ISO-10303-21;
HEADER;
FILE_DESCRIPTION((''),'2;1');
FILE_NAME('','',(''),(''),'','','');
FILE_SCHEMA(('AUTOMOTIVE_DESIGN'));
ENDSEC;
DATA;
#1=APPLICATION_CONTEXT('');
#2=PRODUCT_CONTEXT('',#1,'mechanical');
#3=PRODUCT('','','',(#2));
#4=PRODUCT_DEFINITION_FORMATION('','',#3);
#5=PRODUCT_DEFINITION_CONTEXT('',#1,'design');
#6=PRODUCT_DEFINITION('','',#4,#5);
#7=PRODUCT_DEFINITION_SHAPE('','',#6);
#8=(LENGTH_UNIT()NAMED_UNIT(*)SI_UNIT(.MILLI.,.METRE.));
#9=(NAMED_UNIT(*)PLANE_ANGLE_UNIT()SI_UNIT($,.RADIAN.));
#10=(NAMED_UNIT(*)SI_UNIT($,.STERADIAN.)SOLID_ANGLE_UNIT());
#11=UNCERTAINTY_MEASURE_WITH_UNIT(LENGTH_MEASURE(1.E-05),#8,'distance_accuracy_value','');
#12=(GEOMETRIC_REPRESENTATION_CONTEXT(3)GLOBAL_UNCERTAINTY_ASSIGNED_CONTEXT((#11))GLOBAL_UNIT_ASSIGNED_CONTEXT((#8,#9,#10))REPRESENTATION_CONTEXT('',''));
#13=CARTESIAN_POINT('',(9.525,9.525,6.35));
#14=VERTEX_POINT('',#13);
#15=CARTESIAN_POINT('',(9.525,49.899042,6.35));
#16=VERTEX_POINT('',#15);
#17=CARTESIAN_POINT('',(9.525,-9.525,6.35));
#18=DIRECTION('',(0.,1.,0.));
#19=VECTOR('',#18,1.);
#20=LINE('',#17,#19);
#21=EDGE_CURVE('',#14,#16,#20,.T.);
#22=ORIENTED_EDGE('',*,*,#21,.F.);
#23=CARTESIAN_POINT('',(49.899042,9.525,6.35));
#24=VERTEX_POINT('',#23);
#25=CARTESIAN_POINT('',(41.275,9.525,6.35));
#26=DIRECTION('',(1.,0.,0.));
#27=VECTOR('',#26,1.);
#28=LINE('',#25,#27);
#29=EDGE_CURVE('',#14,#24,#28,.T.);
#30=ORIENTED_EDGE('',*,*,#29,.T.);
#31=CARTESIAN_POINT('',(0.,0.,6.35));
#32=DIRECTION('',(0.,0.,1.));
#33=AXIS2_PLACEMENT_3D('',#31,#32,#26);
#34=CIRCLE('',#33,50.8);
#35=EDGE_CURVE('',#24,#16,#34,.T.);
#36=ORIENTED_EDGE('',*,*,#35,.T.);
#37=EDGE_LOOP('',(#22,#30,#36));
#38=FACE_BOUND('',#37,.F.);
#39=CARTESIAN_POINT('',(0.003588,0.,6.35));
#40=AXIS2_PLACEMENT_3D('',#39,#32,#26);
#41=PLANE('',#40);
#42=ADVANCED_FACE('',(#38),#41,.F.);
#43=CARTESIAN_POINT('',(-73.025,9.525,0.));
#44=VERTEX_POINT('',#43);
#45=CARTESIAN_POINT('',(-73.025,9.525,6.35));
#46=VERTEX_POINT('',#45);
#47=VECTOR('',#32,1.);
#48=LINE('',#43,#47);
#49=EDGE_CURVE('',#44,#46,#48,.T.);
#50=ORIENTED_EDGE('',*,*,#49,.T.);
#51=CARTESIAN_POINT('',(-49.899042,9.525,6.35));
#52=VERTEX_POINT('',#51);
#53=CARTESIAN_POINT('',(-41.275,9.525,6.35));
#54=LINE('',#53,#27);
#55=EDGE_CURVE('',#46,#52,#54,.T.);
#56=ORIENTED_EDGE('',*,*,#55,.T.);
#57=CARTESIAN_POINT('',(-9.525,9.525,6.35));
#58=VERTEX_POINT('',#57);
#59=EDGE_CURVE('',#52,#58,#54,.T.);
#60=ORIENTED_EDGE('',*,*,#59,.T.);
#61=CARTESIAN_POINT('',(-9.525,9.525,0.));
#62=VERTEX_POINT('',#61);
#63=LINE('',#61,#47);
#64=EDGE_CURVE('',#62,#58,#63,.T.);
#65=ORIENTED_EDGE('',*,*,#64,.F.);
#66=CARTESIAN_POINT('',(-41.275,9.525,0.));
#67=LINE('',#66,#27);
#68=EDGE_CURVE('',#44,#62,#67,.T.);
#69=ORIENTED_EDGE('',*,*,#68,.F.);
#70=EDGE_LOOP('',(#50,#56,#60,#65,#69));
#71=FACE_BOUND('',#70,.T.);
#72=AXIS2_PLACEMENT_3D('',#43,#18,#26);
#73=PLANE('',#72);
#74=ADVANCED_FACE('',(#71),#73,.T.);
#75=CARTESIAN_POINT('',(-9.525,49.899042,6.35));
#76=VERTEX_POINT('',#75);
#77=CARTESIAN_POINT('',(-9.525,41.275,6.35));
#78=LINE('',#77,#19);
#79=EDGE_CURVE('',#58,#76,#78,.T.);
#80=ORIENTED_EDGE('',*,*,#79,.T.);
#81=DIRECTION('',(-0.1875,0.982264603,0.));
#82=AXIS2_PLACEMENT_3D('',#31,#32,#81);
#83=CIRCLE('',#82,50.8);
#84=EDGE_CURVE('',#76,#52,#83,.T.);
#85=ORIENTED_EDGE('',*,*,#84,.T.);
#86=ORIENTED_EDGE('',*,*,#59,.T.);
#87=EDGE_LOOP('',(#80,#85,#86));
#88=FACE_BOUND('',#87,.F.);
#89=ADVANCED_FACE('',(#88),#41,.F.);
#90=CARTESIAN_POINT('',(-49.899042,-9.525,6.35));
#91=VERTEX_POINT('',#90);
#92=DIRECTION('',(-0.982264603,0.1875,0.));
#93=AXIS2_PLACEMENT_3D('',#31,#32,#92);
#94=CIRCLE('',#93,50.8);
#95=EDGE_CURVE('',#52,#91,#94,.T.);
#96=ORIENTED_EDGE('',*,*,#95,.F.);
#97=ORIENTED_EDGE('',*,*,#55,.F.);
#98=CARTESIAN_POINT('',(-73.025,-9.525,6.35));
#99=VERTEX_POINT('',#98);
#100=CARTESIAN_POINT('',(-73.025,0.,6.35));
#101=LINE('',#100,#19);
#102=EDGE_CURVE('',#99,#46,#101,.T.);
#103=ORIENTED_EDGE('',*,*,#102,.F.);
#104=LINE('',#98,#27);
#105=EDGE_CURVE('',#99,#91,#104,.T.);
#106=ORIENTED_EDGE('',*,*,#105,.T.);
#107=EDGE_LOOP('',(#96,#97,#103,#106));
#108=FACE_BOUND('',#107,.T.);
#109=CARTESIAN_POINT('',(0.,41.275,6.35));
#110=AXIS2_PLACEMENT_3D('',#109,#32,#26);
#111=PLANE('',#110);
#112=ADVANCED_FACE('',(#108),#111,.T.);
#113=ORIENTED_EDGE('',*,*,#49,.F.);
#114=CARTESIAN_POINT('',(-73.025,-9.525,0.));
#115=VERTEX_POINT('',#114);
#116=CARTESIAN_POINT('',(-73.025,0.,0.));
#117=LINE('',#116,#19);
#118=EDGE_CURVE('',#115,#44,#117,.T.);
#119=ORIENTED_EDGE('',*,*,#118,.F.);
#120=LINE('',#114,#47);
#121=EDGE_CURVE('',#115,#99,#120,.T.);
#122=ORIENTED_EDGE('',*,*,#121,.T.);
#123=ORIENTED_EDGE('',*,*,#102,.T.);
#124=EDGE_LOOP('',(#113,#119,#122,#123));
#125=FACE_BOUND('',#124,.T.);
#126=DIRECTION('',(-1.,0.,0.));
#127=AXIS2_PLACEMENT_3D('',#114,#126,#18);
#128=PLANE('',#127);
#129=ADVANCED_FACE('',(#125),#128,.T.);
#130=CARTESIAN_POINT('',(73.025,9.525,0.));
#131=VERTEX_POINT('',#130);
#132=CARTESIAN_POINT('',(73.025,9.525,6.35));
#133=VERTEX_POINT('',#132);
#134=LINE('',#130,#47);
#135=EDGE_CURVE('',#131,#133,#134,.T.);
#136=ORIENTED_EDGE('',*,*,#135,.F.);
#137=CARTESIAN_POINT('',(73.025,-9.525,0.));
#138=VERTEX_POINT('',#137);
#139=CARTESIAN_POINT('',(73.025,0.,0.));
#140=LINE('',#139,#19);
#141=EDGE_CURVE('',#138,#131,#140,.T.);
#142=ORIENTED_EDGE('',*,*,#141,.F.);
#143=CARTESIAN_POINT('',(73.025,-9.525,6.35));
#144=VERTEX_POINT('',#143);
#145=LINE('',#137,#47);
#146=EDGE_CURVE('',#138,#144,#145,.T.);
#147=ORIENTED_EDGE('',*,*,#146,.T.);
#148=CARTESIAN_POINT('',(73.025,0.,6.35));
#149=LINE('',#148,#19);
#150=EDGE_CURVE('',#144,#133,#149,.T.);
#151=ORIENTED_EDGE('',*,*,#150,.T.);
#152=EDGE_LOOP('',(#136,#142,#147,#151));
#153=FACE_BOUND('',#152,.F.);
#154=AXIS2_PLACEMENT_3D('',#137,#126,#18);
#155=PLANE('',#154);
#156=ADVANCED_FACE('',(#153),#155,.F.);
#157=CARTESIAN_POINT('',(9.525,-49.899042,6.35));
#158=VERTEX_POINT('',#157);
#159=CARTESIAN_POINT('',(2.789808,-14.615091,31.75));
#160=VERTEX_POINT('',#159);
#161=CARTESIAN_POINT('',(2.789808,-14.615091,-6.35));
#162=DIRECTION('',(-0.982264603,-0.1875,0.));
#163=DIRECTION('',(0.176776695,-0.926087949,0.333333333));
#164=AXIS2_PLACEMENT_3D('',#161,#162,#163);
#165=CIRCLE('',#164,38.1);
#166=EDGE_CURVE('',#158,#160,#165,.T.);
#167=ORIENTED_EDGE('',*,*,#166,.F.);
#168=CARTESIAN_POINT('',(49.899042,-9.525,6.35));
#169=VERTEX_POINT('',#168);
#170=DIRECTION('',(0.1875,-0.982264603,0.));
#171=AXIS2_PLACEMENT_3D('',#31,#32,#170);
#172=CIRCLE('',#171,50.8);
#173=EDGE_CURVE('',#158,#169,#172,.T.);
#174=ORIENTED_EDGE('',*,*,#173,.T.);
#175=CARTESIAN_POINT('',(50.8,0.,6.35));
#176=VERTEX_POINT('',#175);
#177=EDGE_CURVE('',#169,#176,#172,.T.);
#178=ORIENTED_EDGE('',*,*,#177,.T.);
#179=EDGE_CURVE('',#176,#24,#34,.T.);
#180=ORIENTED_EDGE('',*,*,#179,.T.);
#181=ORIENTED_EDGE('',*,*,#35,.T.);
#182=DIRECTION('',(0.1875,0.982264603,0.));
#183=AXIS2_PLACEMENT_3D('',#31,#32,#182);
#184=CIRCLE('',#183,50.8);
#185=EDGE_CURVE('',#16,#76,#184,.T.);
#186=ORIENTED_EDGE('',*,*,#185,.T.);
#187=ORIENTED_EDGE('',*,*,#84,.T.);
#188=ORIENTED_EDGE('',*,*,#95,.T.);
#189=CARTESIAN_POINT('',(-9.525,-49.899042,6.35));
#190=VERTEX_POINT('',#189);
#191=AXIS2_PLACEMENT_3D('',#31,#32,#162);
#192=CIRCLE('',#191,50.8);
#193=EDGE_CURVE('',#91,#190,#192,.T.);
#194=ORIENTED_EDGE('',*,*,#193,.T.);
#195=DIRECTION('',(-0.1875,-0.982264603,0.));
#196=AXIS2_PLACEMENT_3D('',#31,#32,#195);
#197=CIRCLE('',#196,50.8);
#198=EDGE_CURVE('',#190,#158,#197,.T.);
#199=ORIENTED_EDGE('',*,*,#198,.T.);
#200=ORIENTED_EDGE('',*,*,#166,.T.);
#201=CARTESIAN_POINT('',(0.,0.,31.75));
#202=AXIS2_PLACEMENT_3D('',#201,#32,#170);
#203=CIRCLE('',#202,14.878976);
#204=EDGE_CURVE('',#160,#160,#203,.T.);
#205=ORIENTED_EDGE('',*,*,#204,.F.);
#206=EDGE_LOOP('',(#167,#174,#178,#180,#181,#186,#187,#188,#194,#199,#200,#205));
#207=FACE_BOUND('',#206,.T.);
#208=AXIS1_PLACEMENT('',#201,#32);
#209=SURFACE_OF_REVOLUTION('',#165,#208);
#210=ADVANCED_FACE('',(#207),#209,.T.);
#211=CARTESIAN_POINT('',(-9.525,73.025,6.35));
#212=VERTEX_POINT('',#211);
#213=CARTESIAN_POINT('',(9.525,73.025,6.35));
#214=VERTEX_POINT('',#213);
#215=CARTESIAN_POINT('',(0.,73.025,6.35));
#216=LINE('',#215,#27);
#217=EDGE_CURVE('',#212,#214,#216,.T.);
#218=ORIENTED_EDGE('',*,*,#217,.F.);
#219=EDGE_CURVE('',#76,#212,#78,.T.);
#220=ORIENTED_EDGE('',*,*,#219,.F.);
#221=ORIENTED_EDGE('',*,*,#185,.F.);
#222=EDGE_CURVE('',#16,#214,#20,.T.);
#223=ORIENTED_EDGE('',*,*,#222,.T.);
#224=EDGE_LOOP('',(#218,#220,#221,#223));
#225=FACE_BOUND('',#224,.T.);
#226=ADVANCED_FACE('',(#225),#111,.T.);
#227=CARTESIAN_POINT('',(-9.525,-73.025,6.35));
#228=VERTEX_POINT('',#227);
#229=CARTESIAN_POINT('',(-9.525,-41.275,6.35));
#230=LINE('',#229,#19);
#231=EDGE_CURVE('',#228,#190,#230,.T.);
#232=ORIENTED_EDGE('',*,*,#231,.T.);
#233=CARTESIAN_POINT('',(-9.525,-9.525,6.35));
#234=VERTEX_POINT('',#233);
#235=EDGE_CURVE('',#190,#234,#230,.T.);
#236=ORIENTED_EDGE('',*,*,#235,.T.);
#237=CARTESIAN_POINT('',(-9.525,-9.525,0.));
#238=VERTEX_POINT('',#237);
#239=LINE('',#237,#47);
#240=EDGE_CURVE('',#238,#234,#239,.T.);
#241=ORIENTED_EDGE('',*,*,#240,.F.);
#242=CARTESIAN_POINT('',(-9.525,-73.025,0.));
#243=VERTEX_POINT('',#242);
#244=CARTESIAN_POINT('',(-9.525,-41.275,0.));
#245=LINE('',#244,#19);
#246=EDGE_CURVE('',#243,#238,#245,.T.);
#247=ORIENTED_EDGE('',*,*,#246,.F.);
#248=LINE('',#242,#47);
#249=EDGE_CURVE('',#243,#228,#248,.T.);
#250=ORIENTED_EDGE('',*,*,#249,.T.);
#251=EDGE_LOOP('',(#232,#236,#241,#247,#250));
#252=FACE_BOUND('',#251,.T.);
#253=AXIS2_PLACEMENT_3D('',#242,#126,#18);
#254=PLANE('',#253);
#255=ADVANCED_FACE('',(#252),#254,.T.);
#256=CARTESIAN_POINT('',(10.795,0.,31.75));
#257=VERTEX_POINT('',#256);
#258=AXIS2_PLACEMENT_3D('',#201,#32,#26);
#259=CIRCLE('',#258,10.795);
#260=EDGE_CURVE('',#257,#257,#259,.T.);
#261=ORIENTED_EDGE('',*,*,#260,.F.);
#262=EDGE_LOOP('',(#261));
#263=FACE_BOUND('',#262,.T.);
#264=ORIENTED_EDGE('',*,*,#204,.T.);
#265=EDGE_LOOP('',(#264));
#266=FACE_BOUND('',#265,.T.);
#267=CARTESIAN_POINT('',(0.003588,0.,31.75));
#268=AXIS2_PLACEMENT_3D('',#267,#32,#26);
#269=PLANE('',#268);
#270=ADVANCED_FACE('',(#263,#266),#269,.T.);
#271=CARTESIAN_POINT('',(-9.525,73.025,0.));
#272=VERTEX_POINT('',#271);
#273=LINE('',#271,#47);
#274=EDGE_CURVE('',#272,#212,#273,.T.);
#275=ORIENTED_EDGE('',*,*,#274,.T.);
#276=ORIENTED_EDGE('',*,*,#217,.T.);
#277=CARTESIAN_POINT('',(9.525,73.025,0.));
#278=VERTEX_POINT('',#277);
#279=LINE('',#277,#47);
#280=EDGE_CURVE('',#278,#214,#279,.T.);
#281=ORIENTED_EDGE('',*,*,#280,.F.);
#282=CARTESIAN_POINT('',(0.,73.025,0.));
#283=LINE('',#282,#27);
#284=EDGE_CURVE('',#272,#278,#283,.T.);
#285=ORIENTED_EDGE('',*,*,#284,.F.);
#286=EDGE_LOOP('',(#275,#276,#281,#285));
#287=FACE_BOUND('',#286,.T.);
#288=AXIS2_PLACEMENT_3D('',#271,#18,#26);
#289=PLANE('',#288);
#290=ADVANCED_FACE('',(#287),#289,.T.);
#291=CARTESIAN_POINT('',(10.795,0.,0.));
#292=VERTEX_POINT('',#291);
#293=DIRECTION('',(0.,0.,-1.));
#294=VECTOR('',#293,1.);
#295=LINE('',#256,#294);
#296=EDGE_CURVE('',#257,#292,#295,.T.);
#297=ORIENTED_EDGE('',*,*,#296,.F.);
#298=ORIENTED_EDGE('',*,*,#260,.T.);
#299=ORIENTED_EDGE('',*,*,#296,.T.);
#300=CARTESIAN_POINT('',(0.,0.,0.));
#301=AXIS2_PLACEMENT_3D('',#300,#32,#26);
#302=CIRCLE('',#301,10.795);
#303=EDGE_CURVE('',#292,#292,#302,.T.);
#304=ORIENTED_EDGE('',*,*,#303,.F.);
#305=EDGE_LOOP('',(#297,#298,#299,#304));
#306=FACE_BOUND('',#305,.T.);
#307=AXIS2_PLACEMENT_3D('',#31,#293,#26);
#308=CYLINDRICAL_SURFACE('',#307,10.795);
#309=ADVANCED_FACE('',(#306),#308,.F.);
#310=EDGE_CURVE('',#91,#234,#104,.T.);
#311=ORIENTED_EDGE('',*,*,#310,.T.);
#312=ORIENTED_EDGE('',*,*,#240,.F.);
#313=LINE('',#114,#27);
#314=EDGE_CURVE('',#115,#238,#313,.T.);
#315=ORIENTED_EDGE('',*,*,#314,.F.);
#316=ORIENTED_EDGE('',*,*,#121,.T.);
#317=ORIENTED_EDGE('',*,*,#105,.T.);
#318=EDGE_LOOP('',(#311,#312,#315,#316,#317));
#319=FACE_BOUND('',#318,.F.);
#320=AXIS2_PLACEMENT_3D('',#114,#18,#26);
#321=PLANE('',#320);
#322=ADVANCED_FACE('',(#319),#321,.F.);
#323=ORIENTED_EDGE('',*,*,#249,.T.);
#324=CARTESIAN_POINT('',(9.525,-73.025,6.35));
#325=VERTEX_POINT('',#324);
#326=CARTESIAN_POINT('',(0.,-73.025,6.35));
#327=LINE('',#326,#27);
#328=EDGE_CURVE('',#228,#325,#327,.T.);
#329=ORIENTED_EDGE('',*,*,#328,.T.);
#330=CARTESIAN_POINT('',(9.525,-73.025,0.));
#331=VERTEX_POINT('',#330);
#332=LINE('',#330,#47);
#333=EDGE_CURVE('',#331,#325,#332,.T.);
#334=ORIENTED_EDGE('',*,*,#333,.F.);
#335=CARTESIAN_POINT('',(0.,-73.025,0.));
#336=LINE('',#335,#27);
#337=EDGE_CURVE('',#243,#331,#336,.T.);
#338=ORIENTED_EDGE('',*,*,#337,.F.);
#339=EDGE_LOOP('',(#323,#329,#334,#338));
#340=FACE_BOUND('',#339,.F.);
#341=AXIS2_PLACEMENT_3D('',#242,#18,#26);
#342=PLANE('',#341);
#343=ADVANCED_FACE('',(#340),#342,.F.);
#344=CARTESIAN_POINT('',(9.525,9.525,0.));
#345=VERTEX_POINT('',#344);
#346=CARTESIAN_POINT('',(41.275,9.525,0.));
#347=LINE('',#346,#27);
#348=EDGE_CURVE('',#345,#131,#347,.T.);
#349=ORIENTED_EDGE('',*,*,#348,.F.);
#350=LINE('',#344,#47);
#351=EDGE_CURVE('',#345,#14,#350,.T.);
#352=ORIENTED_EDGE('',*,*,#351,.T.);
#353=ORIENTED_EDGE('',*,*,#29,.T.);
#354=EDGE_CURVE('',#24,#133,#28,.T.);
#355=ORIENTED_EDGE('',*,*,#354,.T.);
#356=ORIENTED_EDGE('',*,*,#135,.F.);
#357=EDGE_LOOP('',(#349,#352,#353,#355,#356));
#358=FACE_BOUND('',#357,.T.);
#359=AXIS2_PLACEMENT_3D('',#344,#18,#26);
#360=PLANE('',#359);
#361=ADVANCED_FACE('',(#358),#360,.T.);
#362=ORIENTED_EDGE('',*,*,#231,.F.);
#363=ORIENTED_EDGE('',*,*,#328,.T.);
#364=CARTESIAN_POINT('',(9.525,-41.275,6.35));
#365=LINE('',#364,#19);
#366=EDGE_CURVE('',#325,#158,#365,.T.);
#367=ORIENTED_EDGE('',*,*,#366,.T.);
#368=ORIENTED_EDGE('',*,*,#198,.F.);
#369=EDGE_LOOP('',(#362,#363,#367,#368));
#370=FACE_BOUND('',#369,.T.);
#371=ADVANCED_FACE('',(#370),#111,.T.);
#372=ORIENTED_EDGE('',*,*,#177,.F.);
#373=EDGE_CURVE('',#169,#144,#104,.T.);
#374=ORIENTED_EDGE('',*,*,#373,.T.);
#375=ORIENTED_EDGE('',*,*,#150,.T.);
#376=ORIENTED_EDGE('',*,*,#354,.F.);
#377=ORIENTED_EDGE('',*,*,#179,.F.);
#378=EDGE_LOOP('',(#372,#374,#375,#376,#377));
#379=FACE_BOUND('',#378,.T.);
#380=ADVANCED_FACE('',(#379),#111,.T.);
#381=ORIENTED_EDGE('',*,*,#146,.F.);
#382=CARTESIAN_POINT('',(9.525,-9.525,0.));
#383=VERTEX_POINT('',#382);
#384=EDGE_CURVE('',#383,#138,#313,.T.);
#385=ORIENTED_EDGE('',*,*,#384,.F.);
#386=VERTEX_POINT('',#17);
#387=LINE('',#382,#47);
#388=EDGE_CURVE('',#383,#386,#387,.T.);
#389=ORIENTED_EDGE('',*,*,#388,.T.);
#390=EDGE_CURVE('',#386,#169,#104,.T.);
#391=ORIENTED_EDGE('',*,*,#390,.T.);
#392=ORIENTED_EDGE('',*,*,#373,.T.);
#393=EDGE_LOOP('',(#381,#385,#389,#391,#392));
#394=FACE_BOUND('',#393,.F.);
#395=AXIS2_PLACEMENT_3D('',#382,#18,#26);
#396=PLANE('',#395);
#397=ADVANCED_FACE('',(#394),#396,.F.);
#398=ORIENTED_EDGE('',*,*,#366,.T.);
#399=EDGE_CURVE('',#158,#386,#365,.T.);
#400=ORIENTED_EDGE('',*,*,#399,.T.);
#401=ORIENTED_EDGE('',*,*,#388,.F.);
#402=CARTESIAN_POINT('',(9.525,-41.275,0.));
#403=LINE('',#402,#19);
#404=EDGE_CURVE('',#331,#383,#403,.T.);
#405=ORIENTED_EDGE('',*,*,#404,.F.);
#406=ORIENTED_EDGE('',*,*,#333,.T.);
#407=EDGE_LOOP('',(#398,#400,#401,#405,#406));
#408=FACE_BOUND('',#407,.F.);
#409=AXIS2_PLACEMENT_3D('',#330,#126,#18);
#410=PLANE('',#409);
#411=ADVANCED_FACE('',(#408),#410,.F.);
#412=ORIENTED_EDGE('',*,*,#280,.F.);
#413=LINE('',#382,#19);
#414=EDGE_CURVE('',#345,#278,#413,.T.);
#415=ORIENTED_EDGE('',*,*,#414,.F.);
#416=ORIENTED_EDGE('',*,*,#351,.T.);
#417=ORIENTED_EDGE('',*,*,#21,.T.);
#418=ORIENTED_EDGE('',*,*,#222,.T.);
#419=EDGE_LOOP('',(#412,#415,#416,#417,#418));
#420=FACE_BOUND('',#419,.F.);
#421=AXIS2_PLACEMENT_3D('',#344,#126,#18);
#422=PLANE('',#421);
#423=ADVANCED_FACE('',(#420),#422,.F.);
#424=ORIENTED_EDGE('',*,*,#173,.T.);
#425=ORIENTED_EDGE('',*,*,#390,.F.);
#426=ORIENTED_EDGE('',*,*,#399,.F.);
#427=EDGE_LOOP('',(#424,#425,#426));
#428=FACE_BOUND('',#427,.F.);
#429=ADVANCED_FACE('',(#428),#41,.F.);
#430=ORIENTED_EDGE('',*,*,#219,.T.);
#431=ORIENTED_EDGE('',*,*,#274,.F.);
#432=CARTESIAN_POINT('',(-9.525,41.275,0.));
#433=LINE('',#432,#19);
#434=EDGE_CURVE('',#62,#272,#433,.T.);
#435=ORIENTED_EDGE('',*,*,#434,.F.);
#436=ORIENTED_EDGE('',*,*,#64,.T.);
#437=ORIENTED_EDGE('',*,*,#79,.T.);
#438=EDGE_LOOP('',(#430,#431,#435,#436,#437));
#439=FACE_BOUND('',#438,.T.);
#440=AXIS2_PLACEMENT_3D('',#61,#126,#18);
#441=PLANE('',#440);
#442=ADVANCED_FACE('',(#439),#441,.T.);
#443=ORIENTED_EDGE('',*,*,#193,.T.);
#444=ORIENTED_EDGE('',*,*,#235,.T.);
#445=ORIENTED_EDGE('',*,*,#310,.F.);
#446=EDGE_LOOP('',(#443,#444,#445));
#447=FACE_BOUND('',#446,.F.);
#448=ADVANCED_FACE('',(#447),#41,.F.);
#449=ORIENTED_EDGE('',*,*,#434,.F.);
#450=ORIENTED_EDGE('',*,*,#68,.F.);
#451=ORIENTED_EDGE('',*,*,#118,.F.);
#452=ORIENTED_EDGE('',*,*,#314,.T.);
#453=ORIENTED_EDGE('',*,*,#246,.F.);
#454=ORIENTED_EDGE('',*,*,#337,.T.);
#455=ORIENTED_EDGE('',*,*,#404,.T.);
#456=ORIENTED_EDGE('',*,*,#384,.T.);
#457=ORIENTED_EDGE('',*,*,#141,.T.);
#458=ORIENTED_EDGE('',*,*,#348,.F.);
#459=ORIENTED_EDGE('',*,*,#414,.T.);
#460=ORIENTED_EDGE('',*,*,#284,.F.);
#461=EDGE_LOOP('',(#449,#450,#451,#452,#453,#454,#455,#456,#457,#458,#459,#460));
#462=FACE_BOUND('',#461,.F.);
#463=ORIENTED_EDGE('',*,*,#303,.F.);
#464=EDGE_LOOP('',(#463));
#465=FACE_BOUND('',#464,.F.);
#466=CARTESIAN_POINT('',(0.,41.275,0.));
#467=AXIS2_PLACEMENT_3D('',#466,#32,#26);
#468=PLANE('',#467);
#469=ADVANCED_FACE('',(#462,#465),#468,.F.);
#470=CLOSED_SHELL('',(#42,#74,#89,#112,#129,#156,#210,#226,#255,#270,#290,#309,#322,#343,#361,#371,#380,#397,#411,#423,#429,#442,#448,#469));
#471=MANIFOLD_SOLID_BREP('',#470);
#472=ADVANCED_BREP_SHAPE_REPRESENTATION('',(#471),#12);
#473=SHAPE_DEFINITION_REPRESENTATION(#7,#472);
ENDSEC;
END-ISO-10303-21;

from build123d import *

# Parameters (mm, degrees)
F0_W     = 19.05
F0_H     = 63.5
F0_W_2   = 63.5
F0_H_2   = 19.05
F1_DEPTH = 6.35
F2_R     = 10.795
F3_DEPTH = 25.4
F4_DEPTH = 6.35


# Not quite as in the source:
# - a fillet or chamfer that OpenCascade refuses, or shapes differently, is made with other operations: its cross-section is extruded or revolved along the edge and cut away or added


with BuildPart() as f1:
    # F0 (on Top) → F1 (new body)
    with BuildSketch(Plane.XY):
        with Locations((0, 41.275)):
            Rectangle(F0_W, F0_H)
        with Locations((-41.275, 0)):
            Rectangle(F0_W_2, F0_H_2)
        Rectangle(F0_W, F0_H_2)
        with Locations((41.275, 0)):
            Rectangle(F0_W_2, F0_H_2)
        with Locations((0, -41.275)):
            Rectangle(F0_W, F0_H)
    extrude(amount=F1_DEPTH)

    # F2 (on face) → F3 (join)
    with BuildSketch(Plane.XY.offset(6.35)):
        with BuildLine():
            ThreePointArc((49.8990418245, -9.525), (50.5742588907, -4.7837576923), (50.8, 0))
            ThreePointArc((50.8, 0), (50.5742588907, 4.7837576923), (49.8990418245, 9.525))
            Line((49.8990418245, 9.525), (9.525, 9.525))
            Line((9.525, 9.525), (9.525, 49.8990418245))
            ThreePointArc((9.525, 49.8990418245), (0, 50.8), (-9.525, 49.8990418245))
            Line((-9.525, 49.8990418245), (-9.525, 9.525))
            Line((-9.525, 9.525), (-49.8990418245, 9.525))
            ThreePointArc((-49.8990418245, 9.525), (-50.8, 0), (-49.8990418245, -9.525))
            Line((-49.8990418245, -9.525), (-9.525, -9.525))
            Line((-9.525, -9.525), (-9.525, -49.8990418245))
            ThreePointArc((-9.525, -49.8990418245), (0, -50.8), (9.525, -49.8990418245))
            Line((9.525, -49.8990418245), (9.525, -9.525))
            Line((9.525, -9.525), (49.8990418245, -9.525))
        make_face()
        Circle(F2_R, mode=Mode.SUBTRACT)
        with BuildLine():
            ThreePointArc((-49.8990418245, -9.525), (-35.9210244843, -35.9210244843), (-9.525, -49.8990418245))
            Line((-9.525, -49.8990418245), (-9.525, -9.525))
            Line((-9.525, -9.525), (-49.8990418245, -9.525))
        make_face()
        with BuildLine():
            Line((-9.525, 9.525), (-9.525, 49.8990418245))
            ThreePointArc((-9.525, 49.8990418245), (-35.9210244843, 35.9210244843), (-49.8990418245, 9.525))
            Line((-49.8990418245, 9.525), (-9.525, 9.525))
        make_face()
        with BuildLine():
            Line((9.525, 9.525), (49.8990418245, 9.525))
            ThreePointArc((49.8990418245, 9.525), (35.9210244843, 35.9210244843), (9.525, 49.8990418245))
            Line((9.525, 49.8990418245), (9.525, 9.525))
        make_face()
        with BuildLine():
            ThreePointArc((9.525, -49.8990418245), (35.9210244843, -35.9210244843), (49.8990418245, -9.525))
            Line((49.8990418245, -9.525), (9.525, -9.525))
            Line((9.525, -9.525), (9.525, -49.8990418245))
        make_face()
    extrude(amount=F3_DEPTH)

    # F4 (cut, through all): a face of the model
    f4_faces = [f1.faces().sort_by_distance(p)[0] for p in [
        (0, 0, 6.35),
    ]]
    extrude(f4_faces, amount=-F4_DEPTH, mode=Mode.SUBTRACT)

    # F5: fillet of radius 38.1 on 1 edges, made by hand

    # F5_s1 → F5_t2 (revolve, cut)
    with BuildSketch(Plane(origin=(0, 0, 0), x_dir=(0, 0, 1), z_dir=(-0.9822646028, -0.1875, 0))):
        with BuildLine():
            ThreePointArc((6.35, -50.8), (24.7585197333, -36.8760207718), (31.75, -14.8789755157))
            Line((31.75, -14.8789755157), (32.512, -14.8789755157))
            Line((32.512, -14.8789755157), (32.512, -50.8))
            Line((32.512, -50.8), (31.75, -51.562))
            ThreePointArc((31.75, -51.562), (19.05, -51.562), (6.604, -51.5184204897))
            Line((6.604, -51.5184204897), (6.35, -50.8))
        make_face()
    revolve(axis=Axis((0, 0, 31.75), (0, 0, 1)), mode=Mode.SUBTRACT)


solid = f1.part
